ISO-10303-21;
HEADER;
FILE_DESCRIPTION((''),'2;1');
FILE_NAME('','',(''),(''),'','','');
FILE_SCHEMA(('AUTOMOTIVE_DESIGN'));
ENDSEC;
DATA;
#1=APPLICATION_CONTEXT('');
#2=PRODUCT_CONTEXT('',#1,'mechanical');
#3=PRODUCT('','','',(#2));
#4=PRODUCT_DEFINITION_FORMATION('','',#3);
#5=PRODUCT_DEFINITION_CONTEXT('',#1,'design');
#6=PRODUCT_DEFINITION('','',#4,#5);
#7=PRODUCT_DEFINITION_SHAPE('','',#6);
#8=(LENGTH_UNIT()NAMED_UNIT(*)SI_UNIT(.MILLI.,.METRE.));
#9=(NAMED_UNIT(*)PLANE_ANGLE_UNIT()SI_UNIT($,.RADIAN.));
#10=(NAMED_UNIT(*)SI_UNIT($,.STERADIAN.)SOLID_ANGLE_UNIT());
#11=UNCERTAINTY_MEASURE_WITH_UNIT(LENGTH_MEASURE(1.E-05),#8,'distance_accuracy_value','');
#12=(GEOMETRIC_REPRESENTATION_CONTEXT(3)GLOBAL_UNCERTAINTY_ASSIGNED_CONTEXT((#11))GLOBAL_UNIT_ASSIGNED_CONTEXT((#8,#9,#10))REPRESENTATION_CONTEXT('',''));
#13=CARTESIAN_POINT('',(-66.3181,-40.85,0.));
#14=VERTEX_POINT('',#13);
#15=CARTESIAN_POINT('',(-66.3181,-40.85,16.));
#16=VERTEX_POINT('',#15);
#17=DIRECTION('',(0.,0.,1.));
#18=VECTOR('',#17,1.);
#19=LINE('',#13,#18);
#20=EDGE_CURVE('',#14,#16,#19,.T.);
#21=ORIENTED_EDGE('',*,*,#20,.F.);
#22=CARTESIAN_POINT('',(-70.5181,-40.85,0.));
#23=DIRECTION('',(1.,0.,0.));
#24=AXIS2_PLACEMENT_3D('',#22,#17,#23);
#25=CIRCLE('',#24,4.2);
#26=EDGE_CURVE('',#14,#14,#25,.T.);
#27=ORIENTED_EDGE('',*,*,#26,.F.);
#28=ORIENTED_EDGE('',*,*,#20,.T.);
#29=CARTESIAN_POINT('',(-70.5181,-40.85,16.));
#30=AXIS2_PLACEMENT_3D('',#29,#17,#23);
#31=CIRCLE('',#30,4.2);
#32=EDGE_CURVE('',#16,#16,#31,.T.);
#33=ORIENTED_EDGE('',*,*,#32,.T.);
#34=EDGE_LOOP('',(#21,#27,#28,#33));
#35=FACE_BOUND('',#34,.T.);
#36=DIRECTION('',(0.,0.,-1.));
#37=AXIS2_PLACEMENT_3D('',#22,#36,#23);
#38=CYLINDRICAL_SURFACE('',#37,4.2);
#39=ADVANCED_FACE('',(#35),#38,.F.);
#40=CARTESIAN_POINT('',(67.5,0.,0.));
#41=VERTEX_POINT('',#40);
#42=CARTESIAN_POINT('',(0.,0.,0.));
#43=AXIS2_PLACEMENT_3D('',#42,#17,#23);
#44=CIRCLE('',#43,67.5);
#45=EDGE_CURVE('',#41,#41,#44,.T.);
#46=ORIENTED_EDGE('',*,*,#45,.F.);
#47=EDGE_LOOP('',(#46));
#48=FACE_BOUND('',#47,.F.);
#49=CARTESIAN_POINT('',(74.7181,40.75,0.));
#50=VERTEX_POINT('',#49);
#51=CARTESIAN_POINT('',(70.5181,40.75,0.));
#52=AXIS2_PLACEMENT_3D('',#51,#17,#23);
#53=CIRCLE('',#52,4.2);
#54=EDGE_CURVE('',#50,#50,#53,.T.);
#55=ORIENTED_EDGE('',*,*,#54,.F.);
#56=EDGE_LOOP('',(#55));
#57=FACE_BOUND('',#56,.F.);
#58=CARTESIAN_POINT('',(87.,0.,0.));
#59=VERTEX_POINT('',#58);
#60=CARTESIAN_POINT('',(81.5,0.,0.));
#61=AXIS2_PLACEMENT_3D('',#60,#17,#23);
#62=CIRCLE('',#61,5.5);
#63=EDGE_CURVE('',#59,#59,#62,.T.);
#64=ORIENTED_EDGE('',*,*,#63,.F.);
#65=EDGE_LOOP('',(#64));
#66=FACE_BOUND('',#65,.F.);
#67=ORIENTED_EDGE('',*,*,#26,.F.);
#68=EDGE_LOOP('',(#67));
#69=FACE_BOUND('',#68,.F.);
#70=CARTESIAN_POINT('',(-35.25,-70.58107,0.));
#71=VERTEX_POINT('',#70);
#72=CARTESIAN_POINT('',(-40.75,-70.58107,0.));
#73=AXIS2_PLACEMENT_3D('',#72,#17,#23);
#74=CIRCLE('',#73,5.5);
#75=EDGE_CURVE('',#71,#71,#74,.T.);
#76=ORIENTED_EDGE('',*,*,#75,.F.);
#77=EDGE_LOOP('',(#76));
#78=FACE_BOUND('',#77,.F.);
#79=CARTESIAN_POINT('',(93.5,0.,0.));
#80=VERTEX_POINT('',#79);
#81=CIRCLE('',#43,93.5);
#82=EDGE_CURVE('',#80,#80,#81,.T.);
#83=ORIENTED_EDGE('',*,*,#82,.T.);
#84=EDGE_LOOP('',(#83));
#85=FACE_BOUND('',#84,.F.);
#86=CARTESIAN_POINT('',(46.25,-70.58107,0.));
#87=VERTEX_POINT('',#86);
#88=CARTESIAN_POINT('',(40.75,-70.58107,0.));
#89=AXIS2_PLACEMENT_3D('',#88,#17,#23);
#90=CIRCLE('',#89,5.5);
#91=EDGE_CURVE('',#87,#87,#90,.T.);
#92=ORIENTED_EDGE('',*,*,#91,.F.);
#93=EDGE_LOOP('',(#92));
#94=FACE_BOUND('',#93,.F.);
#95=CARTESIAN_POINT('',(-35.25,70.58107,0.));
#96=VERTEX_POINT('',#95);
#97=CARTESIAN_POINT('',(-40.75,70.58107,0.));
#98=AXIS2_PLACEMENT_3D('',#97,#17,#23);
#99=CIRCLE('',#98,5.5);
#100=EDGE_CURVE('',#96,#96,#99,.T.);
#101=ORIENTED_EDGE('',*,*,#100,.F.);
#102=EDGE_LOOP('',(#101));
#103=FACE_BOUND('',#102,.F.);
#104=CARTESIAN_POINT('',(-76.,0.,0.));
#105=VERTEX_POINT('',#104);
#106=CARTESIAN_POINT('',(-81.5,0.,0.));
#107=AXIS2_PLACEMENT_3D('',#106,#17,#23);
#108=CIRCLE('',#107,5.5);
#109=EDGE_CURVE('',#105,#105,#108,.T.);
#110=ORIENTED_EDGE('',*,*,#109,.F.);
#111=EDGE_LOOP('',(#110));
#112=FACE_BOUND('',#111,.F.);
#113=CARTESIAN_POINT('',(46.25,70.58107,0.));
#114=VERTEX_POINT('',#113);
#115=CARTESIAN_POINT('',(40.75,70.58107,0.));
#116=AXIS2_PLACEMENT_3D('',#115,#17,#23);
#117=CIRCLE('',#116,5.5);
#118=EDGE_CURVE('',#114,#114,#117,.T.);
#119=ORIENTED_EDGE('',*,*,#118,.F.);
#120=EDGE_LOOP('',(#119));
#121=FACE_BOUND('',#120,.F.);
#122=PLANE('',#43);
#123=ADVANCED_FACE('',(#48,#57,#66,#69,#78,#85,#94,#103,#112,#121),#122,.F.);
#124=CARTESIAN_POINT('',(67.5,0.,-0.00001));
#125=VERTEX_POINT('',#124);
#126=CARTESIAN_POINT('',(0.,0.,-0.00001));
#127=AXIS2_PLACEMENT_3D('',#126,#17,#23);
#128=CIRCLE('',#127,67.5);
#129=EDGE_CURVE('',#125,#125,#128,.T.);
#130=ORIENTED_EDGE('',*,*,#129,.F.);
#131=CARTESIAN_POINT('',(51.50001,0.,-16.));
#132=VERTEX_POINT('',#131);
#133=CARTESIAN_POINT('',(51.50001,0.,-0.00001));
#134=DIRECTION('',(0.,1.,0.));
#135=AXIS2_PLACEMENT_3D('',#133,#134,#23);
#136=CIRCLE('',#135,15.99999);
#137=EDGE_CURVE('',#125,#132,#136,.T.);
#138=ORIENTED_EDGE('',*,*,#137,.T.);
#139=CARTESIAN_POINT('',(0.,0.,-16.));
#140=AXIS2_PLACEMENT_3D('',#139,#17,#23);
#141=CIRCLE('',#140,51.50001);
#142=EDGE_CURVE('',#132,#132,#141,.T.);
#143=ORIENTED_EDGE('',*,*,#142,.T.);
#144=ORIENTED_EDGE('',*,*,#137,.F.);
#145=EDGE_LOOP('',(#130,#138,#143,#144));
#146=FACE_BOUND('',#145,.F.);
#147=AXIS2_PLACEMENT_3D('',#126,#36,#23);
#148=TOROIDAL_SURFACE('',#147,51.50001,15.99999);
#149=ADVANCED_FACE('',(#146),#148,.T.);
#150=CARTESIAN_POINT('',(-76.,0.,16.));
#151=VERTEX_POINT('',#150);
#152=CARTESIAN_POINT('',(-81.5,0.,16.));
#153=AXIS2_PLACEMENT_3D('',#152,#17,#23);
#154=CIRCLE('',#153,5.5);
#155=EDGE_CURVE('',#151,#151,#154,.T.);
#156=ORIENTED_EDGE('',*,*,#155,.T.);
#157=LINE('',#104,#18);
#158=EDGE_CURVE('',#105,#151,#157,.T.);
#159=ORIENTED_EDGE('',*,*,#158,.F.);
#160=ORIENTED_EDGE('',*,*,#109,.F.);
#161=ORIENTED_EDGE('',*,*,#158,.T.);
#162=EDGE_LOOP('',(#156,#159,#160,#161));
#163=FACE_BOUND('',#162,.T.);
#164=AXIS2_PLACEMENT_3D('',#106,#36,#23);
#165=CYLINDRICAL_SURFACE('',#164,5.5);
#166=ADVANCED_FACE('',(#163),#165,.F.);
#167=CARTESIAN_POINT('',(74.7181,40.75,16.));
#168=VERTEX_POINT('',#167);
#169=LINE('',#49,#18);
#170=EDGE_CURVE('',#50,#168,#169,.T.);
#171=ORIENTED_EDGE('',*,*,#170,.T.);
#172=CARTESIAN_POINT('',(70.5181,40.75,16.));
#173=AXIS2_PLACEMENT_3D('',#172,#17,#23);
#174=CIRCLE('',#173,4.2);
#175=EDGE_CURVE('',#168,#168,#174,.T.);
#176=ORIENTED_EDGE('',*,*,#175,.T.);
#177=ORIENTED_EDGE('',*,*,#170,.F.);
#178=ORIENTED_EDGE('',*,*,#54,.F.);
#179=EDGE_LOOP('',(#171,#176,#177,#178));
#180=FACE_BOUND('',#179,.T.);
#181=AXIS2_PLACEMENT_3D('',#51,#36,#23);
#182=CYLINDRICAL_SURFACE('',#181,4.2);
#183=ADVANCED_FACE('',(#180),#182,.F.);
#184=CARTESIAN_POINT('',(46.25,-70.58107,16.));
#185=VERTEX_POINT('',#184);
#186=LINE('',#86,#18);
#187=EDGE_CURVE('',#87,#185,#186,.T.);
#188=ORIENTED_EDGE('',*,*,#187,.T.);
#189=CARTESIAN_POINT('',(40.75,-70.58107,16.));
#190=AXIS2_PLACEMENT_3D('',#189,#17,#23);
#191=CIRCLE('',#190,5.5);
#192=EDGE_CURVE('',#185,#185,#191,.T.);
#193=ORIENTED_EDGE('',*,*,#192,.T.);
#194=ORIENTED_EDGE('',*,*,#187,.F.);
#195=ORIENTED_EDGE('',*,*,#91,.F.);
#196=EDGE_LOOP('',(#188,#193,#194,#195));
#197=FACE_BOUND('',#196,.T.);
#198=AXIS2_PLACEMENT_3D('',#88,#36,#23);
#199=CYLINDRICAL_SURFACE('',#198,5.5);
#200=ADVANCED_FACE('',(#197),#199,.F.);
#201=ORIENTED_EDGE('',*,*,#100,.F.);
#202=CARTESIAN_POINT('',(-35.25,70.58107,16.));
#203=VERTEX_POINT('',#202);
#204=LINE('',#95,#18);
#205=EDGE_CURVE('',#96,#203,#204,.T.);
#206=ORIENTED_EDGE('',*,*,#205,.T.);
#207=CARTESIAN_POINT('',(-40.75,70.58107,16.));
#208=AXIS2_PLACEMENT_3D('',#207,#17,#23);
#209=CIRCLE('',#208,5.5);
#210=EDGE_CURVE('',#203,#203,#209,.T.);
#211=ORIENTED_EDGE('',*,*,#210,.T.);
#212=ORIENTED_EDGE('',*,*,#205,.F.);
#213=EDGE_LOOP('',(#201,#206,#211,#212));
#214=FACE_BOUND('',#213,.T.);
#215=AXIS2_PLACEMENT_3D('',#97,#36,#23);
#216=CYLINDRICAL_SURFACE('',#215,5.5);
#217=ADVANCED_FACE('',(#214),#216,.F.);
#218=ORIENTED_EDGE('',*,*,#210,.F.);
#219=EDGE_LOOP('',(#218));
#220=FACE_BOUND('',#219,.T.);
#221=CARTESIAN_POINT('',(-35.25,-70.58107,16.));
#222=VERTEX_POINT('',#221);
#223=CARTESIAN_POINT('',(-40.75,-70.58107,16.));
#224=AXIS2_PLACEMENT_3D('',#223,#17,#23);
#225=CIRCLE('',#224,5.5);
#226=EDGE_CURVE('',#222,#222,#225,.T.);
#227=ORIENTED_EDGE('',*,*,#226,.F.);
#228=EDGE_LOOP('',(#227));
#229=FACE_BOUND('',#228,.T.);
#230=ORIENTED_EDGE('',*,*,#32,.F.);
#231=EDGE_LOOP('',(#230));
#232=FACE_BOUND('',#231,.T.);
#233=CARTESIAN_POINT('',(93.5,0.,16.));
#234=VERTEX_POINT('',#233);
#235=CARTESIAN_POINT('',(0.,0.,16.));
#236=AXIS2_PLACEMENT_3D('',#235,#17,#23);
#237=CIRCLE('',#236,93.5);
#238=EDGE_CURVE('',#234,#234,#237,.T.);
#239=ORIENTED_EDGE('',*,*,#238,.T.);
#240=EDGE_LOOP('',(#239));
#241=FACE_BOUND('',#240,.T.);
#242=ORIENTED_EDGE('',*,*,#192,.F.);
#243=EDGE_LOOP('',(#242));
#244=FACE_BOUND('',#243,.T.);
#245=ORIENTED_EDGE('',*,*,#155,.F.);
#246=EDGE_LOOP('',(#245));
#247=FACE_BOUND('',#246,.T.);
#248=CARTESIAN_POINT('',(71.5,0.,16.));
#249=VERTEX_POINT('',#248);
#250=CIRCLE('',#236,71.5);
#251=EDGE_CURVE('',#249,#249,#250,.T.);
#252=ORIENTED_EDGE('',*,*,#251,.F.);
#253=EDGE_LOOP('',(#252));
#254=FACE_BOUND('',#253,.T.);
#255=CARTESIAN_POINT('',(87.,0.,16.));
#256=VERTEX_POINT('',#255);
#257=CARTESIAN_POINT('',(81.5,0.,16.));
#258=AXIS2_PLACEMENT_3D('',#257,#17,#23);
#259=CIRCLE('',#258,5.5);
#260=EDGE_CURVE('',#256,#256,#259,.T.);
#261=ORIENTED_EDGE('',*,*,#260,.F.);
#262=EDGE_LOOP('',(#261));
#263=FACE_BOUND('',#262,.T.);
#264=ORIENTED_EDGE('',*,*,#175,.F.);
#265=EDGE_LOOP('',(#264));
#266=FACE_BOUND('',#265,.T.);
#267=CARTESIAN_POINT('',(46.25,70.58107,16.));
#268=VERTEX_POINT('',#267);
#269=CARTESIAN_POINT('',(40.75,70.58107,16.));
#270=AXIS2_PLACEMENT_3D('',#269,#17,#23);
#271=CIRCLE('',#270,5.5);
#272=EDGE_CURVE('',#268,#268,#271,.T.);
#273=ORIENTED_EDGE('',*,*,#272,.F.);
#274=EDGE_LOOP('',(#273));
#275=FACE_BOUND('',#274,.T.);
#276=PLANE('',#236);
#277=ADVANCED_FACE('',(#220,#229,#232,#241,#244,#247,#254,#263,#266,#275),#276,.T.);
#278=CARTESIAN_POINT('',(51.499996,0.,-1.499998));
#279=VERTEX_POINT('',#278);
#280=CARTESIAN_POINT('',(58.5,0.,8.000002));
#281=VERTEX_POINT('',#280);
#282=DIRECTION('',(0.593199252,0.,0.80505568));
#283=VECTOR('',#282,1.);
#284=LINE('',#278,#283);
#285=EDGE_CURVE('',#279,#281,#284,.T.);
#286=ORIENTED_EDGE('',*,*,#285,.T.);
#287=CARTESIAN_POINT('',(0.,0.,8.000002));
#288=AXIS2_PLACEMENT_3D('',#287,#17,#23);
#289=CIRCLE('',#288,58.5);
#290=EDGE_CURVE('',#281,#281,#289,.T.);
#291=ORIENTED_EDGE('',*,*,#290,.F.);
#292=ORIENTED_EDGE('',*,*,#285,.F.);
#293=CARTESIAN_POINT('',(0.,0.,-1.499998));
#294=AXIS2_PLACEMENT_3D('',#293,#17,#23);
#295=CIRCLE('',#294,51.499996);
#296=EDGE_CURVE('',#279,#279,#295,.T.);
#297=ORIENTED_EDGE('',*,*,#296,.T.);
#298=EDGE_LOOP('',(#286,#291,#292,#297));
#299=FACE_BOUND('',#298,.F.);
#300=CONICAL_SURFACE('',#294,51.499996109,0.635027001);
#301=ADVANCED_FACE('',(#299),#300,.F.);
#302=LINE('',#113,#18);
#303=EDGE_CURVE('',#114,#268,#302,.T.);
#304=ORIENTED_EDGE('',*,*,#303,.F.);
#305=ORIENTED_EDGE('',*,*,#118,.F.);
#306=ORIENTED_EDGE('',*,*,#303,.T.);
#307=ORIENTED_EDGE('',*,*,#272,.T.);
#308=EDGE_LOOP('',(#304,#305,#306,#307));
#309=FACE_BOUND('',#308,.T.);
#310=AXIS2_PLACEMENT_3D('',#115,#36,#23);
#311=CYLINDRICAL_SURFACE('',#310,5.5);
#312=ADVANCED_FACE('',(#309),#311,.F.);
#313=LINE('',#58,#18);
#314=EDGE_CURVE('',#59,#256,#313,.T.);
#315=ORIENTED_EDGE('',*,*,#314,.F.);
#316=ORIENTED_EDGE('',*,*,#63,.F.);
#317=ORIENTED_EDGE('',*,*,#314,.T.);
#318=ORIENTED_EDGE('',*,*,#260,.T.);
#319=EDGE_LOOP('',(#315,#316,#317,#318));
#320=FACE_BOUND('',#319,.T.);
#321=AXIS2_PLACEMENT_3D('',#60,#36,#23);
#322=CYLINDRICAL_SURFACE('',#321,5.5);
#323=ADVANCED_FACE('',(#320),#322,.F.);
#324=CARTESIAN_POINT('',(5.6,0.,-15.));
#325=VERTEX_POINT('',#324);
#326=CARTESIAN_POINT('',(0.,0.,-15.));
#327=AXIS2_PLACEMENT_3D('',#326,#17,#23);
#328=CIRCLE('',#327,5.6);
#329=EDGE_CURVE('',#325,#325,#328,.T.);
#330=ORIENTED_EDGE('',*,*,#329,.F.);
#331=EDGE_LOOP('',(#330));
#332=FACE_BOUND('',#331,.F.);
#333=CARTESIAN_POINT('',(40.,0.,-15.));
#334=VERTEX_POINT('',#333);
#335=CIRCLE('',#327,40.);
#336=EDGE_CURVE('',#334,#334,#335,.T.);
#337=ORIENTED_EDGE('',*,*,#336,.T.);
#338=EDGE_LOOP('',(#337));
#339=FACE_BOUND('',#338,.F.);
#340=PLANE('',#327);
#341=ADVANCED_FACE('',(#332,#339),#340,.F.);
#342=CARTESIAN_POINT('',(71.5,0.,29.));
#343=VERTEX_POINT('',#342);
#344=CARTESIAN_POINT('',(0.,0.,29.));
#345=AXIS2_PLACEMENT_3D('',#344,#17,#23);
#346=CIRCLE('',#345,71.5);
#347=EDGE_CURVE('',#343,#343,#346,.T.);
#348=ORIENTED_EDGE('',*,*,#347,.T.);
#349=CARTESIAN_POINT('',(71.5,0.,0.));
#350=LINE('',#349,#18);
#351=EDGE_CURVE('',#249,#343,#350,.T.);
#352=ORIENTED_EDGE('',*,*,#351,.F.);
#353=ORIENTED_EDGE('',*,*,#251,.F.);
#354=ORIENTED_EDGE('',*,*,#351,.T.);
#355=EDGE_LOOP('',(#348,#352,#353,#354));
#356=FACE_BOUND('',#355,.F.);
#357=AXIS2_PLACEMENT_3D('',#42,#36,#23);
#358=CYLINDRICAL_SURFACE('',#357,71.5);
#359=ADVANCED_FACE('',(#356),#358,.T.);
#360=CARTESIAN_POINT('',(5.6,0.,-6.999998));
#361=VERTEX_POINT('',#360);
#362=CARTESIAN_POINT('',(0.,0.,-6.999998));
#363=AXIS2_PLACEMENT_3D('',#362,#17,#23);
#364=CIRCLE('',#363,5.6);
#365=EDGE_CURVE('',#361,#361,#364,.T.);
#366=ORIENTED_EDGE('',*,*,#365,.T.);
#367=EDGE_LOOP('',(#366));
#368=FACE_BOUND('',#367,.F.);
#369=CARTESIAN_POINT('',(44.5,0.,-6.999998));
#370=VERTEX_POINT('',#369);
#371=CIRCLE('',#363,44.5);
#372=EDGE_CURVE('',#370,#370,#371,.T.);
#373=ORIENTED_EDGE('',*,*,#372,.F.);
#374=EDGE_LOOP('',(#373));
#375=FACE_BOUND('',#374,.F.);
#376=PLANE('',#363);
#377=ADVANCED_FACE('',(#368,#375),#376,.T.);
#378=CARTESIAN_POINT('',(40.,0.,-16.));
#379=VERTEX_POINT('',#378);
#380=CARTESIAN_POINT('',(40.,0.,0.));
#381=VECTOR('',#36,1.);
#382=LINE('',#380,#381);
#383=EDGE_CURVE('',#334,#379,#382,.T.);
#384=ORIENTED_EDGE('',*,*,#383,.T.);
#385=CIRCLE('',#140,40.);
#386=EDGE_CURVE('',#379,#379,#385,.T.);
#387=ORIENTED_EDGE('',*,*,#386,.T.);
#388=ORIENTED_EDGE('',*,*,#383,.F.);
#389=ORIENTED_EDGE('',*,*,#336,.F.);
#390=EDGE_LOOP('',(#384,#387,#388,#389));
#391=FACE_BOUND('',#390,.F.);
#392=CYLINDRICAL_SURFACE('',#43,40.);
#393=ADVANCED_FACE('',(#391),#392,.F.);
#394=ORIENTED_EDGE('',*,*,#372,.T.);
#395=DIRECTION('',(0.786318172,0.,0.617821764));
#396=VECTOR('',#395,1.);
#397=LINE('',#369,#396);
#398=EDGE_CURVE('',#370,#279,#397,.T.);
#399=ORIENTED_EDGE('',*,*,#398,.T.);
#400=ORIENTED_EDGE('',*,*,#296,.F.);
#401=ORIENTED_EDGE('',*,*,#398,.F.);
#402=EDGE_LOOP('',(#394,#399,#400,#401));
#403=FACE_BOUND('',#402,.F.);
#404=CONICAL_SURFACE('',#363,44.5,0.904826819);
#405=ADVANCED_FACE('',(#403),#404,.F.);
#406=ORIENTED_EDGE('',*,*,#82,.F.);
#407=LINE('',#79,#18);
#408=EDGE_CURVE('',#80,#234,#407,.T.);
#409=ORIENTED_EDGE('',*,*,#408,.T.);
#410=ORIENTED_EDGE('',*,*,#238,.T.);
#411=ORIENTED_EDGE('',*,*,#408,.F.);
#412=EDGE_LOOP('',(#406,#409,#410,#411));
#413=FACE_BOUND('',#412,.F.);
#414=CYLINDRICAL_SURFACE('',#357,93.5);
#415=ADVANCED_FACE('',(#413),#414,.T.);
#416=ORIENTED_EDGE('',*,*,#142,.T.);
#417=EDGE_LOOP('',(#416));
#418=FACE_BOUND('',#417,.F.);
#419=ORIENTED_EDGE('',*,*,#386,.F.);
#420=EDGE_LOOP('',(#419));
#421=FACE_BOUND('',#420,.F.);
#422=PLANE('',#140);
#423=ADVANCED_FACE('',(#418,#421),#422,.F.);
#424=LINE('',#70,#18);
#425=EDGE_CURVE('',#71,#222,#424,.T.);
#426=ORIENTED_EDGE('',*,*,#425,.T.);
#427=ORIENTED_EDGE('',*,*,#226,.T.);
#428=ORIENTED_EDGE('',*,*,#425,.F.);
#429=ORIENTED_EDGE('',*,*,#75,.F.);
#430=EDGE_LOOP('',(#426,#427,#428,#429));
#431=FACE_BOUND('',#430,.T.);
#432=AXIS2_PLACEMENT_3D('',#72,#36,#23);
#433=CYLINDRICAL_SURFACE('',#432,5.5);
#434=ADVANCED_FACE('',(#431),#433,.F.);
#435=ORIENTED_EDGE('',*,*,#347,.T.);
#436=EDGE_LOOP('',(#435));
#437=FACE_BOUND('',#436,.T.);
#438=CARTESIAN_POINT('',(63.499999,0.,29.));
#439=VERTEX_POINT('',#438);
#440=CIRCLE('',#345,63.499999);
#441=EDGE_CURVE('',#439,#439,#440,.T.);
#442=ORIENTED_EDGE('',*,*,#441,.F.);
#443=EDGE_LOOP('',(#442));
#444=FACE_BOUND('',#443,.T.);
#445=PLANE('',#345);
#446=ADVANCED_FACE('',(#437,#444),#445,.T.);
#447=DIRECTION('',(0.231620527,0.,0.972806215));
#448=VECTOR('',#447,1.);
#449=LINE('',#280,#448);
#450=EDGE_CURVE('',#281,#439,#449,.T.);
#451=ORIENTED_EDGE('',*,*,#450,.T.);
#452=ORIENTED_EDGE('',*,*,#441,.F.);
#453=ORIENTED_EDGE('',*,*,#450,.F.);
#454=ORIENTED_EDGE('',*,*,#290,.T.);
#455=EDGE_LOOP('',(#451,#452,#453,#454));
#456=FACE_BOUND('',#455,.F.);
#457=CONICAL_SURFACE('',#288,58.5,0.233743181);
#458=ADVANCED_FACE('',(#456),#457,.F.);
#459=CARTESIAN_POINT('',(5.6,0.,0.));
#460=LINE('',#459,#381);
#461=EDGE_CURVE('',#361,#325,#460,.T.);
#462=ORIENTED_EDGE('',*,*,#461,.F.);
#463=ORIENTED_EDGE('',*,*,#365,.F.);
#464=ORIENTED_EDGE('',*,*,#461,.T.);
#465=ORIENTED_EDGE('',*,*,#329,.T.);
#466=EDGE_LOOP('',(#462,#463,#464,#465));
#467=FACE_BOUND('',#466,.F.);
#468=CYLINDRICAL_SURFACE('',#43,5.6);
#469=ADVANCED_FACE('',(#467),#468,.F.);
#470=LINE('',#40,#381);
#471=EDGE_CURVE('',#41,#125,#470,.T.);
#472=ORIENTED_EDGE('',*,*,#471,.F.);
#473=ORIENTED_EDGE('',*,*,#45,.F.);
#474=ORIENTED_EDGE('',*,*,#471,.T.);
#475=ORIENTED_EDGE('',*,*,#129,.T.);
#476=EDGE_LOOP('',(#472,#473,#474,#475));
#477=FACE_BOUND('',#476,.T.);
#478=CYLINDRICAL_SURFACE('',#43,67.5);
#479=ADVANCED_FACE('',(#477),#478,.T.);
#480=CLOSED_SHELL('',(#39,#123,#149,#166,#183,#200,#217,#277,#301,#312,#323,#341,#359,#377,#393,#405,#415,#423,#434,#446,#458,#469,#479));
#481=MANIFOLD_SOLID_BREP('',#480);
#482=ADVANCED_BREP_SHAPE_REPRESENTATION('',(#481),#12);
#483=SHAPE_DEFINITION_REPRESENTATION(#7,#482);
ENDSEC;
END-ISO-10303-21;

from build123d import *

# Parameters (mm, degrees)
F0_R     = 93.5
F0_R_2   = 5.5
F0_R_3   = 4.2
F0_R_4   = 71.5
F1_DEPTH = 16
F0_R_5   = 67.5
F0_R_6   = 40
F2_DEPTH = 29
F3_DEPTH = 16
F4_R     = 15.99999
F0_R_7   = 5.6
F5_DEPTH = 15


# Not quite as in the source:
# - a fillet or chamfer is up to 0.001 mm smaller than in the source, because OpenCascade refuses the exact size


with BuildPart() as f1:
    # F0 (on Top) → F1 (new body)
    with BuildSketch(Plane.XY):
        Circle(F0_R)
        with Locations((-40.75, -70.5810704084)):
            Circle(F0_R_2, mode=Mode.SUBTRACT)
        with Locations((-70.5181, -40.85)):
            Circle(F0_R_3, mode=Mode.SUBTRACT)
        with Locations((-81.5, 0)):
            Circle(F0_R_2, mode=Mode.SUBTRACT)
        Circle(F0_R_4, mode=Mode.SUBTRACT)
        with Locations((40.75, -70.5810704084)):
            Circle(F0_R_2, mode=Mode.SUBTRACT)
        with Locations((81.5, 0)):
            Circle(F0_R_2, mode=Mode.SUBTRACT)
        with Locations((-40.75, 70.5810704084)):
            Circle(F0_R_2, mode=Mode.SUBTRACT)
        with Locations((70.5181, 40.75)):
            Circle(F0_R_3, mode=Mode.SUBTRACT)
        with Locations((40.75, 70.5810704084)):
            Circle(F0_R_2, mode=Mode.SUBTRACT)
    extrude(amount=F1_DEPTH)

    # F0 (on Top) → F2 (join)
    with BuildSketch(Plane.XY):
        Circle(F0_R_4)
        Circle(F0_R_5, mode=Mode.SUBTRACT)
        Circle(F0_R_5)
        Circle(F0_R_6, mode=Mode.SUBTRACT)
    extrude(amount=F2_DEPTH)

    # F0 (on Top) → F3 (join)
    with BuildSketch(Plane.XY):
        Circle(F0_R_5)
        Circle(F0_R_6, mode=Mode.SUBTRACT)
    extrude(amount=-F3_DEPTH)

    # F4 (radius 16 in the source; OpenCascade refuses exactly that, so slightly less here)
    f4_edges = [f1.edges().sort_by_distance(p)[0] for p in [
        (-67.5, 0, -16),
    ]]
    fillet(f4_edges, radius=F4_R)

    # F0 (on Top) → F5 (join)
    with BuildSketch(Plane.XY):
        Circle(F0_R_6)
        Circle(F0_R_7, mode=Mode.SUBTRACT)
    extrude(amount=-F5_DEPTH)

    # F6 (on Front) → F7 (revolve, cut)
    with BuildSketch(Plane.XZ):
        Polygon((0, 29.0000022426), (0, 8.0000022426), (58.5, 8.0000022426), (63.5, 29.0000022426), align=None)
    revolve(axis=Axis((0, 0, 18.5000022426), (0, 0, 1)), mode=Mode.SUBTRACT)

    # F8 (on Front) → F9 (revolve, cut)
    with BuildSketch(Plane.XZ):
        Polygon((44.5, -6.9999977574), (51.4999961092, -1.4999977574), (58.5, 8.0000022426), (0, 8.0000022426), (0, -1.4999977574), (0, -6.9999977574), align=None)
    revolve(axis=Axis((0, 0, 3.2500022426), (0, 0, 1)), mode=Mode.SUBTRACT)


solid = f1.part
